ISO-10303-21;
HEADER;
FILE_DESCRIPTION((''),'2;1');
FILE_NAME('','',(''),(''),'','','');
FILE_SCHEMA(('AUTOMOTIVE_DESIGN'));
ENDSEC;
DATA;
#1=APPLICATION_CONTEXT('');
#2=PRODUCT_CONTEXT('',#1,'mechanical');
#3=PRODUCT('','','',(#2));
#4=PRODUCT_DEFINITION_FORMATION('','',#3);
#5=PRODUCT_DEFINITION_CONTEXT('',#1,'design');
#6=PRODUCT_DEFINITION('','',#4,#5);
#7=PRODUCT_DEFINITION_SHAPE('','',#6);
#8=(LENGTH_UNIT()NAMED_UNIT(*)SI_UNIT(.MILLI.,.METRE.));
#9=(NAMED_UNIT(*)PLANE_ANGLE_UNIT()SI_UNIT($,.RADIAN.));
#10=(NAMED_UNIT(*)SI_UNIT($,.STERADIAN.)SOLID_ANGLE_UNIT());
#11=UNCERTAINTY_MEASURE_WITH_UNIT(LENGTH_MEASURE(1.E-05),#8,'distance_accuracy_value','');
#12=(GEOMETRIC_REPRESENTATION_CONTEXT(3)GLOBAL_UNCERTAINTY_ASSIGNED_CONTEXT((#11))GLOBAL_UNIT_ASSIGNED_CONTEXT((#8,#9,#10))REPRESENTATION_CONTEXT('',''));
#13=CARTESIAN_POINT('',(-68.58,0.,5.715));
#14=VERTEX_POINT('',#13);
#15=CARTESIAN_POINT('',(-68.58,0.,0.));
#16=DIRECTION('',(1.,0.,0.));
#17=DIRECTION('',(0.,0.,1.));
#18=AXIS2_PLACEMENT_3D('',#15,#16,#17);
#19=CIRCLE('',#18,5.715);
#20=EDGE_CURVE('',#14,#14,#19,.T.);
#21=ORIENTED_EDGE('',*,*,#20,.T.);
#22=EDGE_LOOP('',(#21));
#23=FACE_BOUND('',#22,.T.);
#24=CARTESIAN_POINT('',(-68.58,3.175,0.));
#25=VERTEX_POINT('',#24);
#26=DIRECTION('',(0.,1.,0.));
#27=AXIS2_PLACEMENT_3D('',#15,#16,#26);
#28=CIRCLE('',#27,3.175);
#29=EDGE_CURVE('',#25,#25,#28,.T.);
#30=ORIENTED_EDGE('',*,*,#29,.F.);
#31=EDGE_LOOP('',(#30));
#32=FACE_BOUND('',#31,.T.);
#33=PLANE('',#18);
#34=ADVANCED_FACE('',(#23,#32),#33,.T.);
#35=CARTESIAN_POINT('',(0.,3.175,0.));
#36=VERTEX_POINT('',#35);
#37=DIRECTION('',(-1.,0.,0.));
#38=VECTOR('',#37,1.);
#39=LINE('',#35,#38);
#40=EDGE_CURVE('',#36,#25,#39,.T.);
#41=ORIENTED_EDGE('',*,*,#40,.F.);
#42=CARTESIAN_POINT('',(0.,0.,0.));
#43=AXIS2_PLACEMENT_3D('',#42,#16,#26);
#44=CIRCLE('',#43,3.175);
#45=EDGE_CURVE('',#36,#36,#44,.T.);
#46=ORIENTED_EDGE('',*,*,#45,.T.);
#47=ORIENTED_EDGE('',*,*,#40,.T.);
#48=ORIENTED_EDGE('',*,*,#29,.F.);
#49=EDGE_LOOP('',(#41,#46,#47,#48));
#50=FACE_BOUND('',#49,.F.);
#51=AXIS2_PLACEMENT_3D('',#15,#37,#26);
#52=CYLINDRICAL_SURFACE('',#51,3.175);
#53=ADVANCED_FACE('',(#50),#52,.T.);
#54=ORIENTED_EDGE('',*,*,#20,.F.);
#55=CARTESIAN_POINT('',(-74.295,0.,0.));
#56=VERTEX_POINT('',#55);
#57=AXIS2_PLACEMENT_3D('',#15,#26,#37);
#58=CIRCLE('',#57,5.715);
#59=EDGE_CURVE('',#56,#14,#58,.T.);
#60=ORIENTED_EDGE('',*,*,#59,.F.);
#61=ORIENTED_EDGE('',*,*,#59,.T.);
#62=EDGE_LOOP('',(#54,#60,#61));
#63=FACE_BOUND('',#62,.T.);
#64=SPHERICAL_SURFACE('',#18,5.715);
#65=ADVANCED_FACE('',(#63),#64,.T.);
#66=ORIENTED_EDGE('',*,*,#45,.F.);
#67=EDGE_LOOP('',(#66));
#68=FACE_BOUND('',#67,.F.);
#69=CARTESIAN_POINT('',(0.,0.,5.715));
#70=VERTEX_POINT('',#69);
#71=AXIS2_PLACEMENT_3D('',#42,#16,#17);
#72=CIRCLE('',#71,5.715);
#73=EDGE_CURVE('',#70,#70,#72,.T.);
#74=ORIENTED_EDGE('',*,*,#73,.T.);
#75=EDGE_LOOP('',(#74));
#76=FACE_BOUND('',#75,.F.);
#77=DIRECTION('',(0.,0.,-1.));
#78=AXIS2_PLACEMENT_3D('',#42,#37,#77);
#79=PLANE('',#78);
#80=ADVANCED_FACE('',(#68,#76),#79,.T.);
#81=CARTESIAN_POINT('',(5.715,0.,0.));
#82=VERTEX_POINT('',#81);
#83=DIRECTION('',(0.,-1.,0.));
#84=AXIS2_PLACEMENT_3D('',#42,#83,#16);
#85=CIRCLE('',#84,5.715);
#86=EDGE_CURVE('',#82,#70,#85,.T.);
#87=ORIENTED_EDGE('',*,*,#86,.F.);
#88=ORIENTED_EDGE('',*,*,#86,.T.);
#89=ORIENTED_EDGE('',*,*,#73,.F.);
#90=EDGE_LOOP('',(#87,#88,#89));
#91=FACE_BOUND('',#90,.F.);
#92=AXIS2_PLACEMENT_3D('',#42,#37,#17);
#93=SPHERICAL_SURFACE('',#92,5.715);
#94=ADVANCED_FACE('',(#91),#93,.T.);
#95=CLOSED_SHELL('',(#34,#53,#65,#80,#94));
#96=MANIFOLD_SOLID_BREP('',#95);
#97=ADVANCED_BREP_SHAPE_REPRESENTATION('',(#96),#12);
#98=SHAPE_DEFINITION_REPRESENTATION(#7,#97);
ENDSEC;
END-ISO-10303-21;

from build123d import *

# Parameters (mm, degrees)
F0_R     = 3.175
F1_DEPTH = 34.29


# Not quite as in the source:
# - a length typed as a fraction of an inch, garbled in the dataset ("3 / 203.2 mm" for 3/8 in), is restored
# - a feature names something its author has since deleted; it is built from what else it names


with BuildPart() as f1:
    # F0 (on Right) → F1 (new body)
    with BuildSketch(Plane.YZ):
        Circle(F0_R)
    extrude(amount=-F1_DEPTH)

    # F2 (on Front) → F3 (revolve)
    with BuildSketch(Plane.XZ):
        with BuildLine():
            Line((0, 3.175), (0, 0))
            Line((0, 0), (5.715, 0))
            ThreePointArc((5.715, 0), (4.0411152545, 4.0411152545), (0, 5.715))
            Line((0, 5.715), (0, 3.175))
        make_face()
    revolve(axis=Axis((0, 0, 0), (1, 0, 0)))

    # F4: F1 across face


with BuildPart() as f1_1:
    add(f1.part)
    add(f1.part.mirror(Plane(origin=(-34.29, 0, 0), x_dir=(0, 1, 0), z_dir=(-1, 0, 0))))


solid = f1_1.part
